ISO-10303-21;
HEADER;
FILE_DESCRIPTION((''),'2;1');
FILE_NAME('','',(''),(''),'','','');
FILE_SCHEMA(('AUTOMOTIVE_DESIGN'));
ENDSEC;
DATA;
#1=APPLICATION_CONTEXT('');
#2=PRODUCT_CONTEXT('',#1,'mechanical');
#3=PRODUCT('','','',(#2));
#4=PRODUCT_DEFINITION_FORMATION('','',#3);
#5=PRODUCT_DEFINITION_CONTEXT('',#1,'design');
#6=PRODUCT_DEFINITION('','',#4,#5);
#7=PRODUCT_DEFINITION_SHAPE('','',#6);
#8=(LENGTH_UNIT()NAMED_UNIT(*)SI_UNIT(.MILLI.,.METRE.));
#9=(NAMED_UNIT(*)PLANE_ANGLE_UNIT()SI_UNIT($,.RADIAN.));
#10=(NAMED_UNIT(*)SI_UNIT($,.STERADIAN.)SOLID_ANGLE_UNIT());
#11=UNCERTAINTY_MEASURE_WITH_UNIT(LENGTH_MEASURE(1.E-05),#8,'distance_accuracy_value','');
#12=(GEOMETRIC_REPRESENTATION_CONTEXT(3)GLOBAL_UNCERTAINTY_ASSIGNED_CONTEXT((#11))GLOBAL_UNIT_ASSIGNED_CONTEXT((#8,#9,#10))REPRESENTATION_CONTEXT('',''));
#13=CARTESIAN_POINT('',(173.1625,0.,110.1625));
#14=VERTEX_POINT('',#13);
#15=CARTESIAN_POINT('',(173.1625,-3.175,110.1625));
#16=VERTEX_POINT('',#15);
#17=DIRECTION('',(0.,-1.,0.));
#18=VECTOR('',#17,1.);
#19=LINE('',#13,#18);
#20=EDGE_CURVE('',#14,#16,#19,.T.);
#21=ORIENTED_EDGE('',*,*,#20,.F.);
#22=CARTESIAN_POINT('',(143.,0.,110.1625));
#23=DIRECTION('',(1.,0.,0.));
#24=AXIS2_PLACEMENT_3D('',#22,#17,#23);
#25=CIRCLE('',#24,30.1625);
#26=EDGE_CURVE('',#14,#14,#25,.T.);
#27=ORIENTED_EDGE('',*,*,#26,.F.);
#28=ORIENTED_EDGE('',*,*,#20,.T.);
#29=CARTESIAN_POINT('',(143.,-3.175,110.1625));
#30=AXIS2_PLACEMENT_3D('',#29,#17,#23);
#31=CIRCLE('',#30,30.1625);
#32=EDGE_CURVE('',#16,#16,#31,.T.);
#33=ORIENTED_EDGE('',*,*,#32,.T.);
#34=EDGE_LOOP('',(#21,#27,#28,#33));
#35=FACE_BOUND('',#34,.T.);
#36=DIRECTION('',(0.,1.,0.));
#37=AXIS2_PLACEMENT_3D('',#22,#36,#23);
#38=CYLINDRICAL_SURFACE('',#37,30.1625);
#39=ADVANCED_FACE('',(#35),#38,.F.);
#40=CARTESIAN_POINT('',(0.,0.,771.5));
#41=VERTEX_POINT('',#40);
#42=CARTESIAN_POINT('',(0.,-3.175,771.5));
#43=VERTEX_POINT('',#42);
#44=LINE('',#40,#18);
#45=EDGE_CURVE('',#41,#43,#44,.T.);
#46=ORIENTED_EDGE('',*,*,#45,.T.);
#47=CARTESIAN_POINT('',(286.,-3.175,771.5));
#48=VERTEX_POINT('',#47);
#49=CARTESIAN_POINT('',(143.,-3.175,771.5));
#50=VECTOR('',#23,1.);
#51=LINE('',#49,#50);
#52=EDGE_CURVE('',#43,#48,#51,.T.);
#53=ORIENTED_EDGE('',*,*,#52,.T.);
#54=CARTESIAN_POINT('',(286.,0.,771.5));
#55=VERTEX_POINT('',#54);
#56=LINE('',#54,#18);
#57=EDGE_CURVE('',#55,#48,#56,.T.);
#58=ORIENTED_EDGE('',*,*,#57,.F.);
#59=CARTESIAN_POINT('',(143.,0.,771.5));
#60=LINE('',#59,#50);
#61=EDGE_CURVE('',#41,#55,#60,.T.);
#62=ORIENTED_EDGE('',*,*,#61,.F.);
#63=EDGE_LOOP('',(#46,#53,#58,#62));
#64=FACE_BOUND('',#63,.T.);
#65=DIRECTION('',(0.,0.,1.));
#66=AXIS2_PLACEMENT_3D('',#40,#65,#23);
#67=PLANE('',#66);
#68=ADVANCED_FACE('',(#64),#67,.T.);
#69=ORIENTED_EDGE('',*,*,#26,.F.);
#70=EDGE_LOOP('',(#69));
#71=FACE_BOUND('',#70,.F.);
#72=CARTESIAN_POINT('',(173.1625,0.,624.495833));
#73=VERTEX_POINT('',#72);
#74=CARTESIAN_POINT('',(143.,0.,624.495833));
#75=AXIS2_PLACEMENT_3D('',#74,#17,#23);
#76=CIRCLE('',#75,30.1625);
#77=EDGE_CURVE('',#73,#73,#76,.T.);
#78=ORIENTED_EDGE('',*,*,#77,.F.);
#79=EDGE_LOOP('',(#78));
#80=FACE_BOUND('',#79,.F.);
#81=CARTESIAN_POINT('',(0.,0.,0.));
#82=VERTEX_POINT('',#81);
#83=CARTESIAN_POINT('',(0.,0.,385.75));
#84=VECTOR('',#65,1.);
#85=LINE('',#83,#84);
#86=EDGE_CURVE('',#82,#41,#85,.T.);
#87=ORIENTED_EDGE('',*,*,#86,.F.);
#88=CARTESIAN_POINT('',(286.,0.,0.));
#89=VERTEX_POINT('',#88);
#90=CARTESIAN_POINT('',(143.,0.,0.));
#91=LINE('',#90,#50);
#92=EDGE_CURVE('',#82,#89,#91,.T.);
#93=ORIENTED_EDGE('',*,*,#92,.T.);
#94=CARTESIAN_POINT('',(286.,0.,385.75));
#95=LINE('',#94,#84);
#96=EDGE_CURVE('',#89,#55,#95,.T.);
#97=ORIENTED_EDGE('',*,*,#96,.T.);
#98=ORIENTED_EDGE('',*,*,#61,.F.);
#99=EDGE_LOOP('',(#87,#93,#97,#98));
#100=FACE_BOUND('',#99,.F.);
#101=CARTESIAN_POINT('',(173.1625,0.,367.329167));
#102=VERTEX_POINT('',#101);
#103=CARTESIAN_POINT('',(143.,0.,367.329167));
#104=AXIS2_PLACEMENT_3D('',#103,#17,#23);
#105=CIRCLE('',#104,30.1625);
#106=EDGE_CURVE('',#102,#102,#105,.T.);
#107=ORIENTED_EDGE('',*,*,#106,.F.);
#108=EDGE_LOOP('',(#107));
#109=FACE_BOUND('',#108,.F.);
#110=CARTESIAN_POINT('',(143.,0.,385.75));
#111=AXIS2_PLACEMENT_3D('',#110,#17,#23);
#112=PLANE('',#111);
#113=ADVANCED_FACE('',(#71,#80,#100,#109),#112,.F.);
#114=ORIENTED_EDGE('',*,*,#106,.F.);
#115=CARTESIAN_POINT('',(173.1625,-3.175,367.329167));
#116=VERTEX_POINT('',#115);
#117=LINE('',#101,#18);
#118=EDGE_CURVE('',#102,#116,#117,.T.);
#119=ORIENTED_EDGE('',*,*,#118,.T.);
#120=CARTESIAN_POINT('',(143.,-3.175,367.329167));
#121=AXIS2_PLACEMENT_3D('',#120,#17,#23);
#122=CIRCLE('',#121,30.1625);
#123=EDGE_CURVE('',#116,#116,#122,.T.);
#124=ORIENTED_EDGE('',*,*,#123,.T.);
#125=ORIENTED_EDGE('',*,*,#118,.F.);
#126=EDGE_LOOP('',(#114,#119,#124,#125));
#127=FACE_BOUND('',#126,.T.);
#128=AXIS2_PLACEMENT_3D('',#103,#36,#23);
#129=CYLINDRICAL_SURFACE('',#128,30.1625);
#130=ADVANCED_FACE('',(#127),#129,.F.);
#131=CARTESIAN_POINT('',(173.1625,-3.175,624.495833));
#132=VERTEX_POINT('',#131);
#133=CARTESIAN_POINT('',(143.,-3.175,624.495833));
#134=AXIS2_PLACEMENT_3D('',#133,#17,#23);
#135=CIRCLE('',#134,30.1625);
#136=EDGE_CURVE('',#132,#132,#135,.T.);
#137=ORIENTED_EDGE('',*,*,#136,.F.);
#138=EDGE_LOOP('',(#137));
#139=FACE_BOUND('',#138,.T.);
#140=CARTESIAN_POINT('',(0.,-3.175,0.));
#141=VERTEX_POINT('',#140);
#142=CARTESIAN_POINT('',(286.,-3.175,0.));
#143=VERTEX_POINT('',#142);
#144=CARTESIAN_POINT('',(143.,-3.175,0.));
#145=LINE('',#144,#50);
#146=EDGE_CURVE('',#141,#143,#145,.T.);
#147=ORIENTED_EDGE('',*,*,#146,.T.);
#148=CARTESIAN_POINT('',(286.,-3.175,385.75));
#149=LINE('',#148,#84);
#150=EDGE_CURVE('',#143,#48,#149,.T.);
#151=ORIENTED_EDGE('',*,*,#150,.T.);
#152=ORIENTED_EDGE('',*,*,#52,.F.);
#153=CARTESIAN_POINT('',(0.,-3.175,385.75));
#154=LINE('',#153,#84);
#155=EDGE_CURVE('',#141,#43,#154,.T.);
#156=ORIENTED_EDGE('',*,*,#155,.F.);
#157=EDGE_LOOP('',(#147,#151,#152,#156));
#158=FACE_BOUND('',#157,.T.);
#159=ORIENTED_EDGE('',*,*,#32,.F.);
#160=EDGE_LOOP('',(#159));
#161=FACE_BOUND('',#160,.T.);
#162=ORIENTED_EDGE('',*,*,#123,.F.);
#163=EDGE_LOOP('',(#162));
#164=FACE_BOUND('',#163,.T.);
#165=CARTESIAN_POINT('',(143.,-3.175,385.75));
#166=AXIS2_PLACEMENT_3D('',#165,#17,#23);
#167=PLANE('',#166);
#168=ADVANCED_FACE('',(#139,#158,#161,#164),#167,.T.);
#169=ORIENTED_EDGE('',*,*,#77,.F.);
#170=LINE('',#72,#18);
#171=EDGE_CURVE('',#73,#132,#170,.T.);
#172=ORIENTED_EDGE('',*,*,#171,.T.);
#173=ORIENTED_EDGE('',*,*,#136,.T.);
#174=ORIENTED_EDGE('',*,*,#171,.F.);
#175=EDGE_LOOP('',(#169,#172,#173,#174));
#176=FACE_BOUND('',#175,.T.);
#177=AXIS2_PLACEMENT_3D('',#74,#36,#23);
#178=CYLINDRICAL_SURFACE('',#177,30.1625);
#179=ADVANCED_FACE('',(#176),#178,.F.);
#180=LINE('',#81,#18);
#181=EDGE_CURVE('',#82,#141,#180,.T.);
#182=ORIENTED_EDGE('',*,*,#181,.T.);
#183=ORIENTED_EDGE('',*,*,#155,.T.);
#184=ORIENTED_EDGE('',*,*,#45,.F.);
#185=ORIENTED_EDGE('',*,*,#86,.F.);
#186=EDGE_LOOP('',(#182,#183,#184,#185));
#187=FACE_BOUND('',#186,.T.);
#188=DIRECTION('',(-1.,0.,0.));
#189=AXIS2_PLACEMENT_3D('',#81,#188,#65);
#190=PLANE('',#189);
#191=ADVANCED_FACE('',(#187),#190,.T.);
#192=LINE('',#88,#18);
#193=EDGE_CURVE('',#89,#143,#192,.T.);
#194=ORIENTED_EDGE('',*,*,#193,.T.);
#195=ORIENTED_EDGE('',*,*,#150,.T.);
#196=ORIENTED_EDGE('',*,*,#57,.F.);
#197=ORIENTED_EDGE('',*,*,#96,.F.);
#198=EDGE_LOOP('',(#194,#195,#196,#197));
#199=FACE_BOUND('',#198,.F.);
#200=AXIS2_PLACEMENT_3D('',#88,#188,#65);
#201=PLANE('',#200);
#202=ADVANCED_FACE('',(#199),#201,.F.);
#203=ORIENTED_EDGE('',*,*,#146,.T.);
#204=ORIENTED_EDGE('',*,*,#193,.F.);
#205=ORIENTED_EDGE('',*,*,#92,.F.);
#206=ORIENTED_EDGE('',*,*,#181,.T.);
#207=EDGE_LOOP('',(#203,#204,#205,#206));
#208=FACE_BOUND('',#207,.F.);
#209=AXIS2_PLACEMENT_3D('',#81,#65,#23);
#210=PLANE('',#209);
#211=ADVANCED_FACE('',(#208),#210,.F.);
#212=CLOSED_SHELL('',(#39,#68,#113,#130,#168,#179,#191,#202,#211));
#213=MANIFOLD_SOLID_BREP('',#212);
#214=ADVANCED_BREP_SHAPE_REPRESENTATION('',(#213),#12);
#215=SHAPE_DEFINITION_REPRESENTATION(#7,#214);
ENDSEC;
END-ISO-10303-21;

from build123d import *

# Parameters (mm, degrees)
F0_W     = 286
F0_H     = 771.5
F0_R     = 30.1625
F1_DEPTH = 3.175


# Not quite as in the source:
# - a length typed as a fraction of an inch, garbled in the dataset ("3 / 203.2 mm" for 3/8 in), is restored


with BuildPart() as f1:
    # F0 (on Front) → F1 (new body)
    with BuildSketch(Plane.XZ):
        with Locations((143, 385.75)):
            Rectangle(F0_W, F0_H)
        with Locations((143, 110.1625)):
            Circle(F0_R, mode=Mode.SUBTRACT)
        with Locations((143, 367.3291666667)):
            Circle(F0_R, mode=Mode.SUBTRACT)
        with Locations((143, 624.4958333333)):
            Circle(F0_R, mode=Mode.SUBTRACT)
    extrude(amount=F1_DEPTH)


solid = f1.part
